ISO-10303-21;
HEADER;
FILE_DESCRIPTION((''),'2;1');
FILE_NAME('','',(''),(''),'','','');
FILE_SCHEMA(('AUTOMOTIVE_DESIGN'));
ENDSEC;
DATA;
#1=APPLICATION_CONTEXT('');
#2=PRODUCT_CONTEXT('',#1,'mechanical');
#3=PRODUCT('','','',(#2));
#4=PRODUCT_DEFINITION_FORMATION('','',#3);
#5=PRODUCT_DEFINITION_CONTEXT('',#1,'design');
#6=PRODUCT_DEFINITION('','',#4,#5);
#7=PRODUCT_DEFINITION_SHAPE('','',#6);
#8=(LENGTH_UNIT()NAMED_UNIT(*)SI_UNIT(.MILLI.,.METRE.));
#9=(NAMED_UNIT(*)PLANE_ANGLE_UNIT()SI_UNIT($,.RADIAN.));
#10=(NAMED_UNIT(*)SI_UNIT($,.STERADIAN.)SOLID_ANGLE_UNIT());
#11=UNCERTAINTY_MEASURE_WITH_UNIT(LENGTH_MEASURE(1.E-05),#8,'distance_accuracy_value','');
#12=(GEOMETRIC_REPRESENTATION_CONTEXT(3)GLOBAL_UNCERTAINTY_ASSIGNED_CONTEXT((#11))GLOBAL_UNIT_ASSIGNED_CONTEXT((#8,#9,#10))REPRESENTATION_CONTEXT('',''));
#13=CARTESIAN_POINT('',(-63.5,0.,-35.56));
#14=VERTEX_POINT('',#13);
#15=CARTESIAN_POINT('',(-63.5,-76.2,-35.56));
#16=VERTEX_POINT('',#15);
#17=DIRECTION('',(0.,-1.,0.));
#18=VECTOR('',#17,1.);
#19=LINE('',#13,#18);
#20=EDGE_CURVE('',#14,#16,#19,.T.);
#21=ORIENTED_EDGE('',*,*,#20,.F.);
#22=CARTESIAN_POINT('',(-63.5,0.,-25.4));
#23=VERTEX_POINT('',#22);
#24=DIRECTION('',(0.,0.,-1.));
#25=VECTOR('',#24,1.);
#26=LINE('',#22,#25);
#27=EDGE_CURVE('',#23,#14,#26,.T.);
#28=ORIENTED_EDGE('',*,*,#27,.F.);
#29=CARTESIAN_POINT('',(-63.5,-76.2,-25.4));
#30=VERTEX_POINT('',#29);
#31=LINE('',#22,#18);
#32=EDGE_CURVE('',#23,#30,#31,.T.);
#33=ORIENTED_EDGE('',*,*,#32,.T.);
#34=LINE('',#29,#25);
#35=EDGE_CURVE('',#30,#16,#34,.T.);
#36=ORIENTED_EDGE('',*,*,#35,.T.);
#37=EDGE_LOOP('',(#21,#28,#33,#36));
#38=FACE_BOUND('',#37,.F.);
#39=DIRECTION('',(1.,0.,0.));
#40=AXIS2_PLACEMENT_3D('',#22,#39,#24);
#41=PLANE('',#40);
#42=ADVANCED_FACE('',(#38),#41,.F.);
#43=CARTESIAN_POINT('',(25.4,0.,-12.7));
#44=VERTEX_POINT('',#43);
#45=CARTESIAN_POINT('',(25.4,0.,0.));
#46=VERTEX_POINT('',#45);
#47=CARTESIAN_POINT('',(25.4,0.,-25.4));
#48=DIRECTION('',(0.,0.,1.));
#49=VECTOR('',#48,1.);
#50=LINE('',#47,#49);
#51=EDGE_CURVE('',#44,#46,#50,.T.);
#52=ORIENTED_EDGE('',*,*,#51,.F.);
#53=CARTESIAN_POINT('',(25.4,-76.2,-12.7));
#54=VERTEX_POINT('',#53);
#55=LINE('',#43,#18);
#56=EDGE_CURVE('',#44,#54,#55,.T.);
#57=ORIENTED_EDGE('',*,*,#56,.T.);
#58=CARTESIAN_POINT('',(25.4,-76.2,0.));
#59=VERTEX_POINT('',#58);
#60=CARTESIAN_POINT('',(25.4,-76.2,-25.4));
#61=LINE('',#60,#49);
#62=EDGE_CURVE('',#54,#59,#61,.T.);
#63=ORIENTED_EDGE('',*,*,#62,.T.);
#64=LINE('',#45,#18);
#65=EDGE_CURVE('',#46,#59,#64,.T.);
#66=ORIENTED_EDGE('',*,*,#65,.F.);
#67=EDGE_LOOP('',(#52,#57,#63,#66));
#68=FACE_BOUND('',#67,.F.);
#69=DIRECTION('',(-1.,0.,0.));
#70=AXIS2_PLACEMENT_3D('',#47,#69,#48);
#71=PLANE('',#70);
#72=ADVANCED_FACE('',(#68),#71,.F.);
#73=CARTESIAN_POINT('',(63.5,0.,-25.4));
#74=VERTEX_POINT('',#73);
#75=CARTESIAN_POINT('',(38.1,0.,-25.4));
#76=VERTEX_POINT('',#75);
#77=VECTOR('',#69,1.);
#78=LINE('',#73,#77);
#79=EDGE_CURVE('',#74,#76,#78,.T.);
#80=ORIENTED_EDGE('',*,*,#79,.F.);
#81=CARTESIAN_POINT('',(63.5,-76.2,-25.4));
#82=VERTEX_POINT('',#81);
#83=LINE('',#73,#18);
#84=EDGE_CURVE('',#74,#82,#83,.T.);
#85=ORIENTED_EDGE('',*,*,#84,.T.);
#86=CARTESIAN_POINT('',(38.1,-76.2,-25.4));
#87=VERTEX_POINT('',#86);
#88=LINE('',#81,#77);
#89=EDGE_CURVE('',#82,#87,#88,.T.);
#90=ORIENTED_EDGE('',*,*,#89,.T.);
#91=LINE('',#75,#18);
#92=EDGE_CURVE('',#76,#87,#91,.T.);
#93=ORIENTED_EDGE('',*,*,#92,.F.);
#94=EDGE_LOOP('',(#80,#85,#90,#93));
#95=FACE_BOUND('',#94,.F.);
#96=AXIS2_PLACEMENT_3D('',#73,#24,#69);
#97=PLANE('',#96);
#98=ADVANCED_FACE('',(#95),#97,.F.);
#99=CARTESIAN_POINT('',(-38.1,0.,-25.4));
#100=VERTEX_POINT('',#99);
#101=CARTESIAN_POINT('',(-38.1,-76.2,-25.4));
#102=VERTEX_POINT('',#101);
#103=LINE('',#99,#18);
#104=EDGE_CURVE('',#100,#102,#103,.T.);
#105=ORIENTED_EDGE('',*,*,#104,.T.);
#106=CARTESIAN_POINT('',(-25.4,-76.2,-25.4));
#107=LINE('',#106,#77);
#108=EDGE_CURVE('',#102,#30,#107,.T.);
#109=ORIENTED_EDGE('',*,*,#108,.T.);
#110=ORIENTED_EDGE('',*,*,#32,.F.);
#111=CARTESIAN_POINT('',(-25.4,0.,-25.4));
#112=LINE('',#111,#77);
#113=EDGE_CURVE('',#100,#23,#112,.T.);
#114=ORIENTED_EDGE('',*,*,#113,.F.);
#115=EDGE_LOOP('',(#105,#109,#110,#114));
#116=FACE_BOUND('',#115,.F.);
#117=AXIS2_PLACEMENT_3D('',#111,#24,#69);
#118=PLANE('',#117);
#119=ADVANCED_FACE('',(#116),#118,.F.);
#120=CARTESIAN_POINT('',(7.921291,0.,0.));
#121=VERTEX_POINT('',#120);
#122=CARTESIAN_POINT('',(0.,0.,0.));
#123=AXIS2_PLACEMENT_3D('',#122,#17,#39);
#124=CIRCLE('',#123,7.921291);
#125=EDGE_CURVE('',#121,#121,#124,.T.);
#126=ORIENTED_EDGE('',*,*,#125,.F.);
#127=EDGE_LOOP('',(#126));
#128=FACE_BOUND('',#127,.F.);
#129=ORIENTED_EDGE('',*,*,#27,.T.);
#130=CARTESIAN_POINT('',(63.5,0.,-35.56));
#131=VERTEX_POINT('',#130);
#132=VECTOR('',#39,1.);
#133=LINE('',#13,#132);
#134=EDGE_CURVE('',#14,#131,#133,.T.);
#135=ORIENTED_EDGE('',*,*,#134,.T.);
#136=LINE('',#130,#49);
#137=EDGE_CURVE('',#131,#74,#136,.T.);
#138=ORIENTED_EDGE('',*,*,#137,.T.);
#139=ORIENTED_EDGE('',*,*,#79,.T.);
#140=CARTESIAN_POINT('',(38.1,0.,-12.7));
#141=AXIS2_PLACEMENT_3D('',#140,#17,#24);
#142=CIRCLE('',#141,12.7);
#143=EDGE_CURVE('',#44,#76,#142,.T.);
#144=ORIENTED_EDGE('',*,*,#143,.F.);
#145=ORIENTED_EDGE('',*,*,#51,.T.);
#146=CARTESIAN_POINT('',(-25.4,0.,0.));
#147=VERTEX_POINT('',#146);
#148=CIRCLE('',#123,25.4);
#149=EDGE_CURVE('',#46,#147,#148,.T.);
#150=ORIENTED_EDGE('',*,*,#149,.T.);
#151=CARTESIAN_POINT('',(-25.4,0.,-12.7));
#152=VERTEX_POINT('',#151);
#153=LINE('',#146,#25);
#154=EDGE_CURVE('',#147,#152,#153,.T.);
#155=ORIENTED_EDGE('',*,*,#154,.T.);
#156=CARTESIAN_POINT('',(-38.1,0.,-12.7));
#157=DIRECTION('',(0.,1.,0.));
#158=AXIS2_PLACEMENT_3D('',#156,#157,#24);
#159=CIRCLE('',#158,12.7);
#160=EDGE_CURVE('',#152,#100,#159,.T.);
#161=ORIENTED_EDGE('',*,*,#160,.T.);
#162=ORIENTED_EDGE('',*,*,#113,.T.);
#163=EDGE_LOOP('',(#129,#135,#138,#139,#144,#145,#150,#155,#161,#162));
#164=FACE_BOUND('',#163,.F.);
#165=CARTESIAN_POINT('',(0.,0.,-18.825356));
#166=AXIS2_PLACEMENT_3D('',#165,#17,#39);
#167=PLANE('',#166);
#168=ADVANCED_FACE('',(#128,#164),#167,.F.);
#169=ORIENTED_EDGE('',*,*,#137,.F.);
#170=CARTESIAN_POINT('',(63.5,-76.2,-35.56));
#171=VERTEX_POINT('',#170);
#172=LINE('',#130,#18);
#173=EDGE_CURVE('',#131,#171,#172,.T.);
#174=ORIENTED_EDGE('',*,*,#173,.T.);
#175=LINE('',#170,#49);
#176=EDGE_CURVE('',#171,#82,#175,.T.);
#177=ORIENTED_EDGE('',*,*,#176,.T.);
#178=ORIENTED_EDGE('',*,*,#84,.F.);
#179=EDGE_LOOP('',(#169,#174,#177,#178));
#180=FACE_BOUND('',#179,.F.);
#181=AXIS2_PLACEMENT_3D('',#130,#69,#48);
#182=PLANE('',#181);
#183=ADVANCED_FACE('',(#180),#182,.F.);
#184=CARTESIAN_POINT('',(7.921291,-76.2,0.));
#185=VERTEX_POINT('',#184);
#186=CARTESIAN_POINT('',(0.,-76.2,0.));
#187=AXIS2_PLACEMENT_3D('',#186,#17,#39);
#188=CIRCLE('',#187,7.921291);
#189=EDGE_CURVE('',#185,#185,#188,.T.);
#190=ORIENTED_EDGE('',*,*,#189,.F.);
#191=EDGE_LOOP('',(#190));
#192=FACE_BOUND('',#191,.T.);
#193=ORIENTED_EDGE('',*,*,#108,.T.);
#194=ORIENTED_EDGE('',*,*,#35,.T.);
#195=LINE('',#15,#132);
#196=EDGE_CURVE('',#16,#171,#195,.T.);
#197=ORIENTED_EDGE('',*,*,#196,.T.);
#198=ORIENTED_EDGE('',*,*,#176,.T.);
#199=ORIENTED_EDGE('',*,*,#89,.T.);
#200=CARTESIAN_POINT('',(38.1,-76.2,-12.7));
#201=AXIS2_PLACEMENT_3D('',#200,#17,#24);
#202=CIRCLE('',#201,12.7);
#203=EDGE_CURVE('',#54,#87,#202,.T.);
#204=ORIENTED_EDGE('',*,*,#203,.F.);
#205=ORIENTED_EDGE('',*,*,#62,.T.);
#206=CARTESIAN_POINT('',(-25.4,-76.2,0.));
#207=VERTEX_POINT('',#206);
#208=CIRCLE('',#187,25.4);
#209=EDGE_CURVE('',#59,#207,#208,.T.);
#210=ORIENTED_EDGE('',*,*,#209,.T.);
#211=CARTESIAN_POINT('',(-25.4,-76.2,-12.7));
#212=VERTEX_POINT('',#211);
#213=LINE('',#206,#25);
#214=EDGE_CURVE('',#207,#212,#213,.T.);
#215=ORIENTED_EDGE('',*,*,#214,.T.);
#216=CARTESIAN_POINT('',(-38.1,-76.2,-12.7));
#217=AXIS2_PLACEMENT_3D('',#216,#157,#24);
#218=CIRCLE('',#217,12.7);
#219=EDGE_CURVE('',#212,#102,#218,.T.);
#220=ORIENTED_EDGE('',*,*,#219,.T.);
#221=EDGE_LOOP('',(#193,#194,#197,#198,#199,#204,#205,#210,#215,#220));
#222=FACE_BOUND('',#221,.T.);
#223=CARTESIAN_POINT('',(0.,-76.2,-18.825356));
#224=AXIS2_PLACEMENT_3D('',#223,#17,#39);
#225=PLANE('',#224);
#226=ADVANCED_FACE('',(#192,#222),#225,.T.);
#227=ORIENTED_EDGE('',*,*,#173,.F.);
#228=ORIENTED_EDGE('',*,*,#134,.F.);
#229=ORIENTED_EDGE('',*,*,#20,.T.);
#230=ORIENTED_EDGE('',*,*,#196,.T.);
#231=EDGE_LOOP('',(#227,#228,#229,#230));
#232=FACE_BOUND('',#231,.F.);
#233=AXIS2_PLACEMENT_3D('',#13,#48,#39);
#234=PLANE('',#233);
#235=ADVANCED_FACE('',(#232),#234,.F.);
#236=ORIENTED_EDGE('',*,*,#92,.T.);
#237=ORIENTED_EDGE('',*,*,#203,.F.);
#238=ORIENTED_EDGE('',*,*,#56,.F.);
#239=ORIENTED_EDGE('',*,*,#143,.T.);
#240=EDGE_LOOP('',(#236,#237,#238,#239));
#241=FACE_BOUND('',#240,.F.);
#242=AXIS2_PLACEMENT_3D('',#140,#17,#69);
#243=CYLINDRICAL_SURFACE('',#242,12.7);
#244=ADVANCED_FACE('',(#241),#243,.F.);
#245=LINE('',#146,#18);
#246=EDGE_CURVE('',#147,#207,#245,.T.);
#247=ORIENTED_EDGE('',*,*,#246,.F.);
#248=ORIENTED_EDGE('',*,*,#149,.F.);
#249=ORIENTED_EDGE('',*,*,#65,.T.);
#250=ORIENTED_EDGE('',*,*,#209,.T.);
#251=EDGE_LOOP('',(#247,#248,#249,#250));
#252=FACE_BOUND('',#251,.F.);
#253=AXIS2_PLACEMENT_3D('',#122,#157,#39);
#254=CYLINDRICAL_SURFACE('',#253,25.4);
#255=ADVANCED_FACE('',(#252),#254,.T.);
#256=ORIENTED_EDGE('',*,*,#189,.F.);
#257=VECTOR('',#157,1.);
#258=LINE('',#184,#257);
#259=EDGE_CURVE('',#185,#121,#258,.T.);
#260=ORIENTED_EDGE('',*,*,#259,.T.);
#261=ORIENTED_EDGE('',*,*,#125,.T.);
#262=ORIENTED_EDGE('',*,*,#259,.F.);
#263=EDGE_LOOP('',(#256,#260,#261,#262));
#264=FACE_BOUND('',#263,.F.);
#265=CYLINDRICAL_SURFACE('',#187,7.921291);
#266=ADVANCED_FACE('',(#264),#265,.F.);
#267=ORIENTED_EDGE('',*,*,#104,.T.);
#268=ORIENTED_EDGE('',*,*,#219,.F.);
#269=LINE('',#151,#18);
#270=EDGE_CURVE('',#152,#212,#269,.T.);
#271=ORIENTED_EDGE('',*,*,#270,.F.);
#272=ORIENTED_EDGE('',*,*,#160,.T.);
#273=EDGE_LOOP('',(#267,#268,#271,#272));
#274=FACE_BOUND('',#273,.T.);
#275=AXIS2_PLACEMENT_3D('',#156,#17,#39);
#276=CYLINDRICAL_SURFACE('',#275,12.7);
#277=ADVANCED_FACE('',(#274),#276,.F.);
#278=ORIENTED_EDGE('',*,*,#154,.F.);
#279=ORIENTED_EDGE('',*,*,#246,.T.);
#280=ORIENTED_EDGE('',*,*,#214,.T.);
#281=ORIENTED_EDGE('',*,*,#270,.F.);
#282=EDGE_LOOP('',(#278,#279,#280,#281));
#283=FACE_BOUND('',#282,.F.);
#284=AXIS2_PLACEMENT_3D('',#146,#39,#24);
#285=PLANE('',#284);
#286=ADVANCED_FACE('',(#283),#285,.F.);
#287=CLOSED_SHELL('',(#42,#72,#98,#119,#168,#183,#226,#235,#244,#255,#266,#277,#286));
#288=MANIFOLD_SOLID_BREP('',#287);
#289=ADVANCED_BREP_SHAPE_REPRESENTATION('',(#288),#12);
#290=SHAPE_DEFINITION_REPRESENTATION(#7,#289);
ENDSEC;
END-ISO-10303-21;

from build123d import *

# Parameters (mm, degrees)
F1_DEPTH = 76.2
F2_R     = 12.7
F3_R     = 7.921290647
F4_DEPTH = 101.6


# Not quite as in the source:
# - a feature names something its author has since deleted; it is built from what else it names


with BuildPart() as f1:
    # F0 (on Front) → F1 (new body)
    with BuildSketch(Plane.XZ):
        with BuildLine():
            Line((25.4, -25.4), (25.4, 0))
            ThreePointArc((25.4, 0), (0, 25.4), (-25.4, 0))
            Line((-25.4, 0), (-25.4, -25.4))
            Line((-25.4, -25.4), (-63.5, -25.4))
            Line((-63.5, -25.4), (-63.5, -35.56))
            Line((-63.5, -35.56), (63.5, -35.56))
            Line((63.5, -35.56), (63.5, -25.4))
            Line((63.5, -25.4), (25.4, -25.4))
        make_face()
    extrude(amount=F1_DEPTH)

    # F2
    f2_edges = [f1.edges().sort_by_distance(p)[0] for p in [
        (25.4, -38.1, -25.4),
        (-25.4, -38.1, -25.4),
    ]]
    fillet(f2_edges, radius=F2_R)

    # F3 (on face) → F4 (cut)
    with BuildSketch(Plane.XZ.offset(76.2)):
        Circle(F3_R)
    extrude(amount=-F4_DEPTH, mode=Mode.SUBTRACT)


solid = f1.part
